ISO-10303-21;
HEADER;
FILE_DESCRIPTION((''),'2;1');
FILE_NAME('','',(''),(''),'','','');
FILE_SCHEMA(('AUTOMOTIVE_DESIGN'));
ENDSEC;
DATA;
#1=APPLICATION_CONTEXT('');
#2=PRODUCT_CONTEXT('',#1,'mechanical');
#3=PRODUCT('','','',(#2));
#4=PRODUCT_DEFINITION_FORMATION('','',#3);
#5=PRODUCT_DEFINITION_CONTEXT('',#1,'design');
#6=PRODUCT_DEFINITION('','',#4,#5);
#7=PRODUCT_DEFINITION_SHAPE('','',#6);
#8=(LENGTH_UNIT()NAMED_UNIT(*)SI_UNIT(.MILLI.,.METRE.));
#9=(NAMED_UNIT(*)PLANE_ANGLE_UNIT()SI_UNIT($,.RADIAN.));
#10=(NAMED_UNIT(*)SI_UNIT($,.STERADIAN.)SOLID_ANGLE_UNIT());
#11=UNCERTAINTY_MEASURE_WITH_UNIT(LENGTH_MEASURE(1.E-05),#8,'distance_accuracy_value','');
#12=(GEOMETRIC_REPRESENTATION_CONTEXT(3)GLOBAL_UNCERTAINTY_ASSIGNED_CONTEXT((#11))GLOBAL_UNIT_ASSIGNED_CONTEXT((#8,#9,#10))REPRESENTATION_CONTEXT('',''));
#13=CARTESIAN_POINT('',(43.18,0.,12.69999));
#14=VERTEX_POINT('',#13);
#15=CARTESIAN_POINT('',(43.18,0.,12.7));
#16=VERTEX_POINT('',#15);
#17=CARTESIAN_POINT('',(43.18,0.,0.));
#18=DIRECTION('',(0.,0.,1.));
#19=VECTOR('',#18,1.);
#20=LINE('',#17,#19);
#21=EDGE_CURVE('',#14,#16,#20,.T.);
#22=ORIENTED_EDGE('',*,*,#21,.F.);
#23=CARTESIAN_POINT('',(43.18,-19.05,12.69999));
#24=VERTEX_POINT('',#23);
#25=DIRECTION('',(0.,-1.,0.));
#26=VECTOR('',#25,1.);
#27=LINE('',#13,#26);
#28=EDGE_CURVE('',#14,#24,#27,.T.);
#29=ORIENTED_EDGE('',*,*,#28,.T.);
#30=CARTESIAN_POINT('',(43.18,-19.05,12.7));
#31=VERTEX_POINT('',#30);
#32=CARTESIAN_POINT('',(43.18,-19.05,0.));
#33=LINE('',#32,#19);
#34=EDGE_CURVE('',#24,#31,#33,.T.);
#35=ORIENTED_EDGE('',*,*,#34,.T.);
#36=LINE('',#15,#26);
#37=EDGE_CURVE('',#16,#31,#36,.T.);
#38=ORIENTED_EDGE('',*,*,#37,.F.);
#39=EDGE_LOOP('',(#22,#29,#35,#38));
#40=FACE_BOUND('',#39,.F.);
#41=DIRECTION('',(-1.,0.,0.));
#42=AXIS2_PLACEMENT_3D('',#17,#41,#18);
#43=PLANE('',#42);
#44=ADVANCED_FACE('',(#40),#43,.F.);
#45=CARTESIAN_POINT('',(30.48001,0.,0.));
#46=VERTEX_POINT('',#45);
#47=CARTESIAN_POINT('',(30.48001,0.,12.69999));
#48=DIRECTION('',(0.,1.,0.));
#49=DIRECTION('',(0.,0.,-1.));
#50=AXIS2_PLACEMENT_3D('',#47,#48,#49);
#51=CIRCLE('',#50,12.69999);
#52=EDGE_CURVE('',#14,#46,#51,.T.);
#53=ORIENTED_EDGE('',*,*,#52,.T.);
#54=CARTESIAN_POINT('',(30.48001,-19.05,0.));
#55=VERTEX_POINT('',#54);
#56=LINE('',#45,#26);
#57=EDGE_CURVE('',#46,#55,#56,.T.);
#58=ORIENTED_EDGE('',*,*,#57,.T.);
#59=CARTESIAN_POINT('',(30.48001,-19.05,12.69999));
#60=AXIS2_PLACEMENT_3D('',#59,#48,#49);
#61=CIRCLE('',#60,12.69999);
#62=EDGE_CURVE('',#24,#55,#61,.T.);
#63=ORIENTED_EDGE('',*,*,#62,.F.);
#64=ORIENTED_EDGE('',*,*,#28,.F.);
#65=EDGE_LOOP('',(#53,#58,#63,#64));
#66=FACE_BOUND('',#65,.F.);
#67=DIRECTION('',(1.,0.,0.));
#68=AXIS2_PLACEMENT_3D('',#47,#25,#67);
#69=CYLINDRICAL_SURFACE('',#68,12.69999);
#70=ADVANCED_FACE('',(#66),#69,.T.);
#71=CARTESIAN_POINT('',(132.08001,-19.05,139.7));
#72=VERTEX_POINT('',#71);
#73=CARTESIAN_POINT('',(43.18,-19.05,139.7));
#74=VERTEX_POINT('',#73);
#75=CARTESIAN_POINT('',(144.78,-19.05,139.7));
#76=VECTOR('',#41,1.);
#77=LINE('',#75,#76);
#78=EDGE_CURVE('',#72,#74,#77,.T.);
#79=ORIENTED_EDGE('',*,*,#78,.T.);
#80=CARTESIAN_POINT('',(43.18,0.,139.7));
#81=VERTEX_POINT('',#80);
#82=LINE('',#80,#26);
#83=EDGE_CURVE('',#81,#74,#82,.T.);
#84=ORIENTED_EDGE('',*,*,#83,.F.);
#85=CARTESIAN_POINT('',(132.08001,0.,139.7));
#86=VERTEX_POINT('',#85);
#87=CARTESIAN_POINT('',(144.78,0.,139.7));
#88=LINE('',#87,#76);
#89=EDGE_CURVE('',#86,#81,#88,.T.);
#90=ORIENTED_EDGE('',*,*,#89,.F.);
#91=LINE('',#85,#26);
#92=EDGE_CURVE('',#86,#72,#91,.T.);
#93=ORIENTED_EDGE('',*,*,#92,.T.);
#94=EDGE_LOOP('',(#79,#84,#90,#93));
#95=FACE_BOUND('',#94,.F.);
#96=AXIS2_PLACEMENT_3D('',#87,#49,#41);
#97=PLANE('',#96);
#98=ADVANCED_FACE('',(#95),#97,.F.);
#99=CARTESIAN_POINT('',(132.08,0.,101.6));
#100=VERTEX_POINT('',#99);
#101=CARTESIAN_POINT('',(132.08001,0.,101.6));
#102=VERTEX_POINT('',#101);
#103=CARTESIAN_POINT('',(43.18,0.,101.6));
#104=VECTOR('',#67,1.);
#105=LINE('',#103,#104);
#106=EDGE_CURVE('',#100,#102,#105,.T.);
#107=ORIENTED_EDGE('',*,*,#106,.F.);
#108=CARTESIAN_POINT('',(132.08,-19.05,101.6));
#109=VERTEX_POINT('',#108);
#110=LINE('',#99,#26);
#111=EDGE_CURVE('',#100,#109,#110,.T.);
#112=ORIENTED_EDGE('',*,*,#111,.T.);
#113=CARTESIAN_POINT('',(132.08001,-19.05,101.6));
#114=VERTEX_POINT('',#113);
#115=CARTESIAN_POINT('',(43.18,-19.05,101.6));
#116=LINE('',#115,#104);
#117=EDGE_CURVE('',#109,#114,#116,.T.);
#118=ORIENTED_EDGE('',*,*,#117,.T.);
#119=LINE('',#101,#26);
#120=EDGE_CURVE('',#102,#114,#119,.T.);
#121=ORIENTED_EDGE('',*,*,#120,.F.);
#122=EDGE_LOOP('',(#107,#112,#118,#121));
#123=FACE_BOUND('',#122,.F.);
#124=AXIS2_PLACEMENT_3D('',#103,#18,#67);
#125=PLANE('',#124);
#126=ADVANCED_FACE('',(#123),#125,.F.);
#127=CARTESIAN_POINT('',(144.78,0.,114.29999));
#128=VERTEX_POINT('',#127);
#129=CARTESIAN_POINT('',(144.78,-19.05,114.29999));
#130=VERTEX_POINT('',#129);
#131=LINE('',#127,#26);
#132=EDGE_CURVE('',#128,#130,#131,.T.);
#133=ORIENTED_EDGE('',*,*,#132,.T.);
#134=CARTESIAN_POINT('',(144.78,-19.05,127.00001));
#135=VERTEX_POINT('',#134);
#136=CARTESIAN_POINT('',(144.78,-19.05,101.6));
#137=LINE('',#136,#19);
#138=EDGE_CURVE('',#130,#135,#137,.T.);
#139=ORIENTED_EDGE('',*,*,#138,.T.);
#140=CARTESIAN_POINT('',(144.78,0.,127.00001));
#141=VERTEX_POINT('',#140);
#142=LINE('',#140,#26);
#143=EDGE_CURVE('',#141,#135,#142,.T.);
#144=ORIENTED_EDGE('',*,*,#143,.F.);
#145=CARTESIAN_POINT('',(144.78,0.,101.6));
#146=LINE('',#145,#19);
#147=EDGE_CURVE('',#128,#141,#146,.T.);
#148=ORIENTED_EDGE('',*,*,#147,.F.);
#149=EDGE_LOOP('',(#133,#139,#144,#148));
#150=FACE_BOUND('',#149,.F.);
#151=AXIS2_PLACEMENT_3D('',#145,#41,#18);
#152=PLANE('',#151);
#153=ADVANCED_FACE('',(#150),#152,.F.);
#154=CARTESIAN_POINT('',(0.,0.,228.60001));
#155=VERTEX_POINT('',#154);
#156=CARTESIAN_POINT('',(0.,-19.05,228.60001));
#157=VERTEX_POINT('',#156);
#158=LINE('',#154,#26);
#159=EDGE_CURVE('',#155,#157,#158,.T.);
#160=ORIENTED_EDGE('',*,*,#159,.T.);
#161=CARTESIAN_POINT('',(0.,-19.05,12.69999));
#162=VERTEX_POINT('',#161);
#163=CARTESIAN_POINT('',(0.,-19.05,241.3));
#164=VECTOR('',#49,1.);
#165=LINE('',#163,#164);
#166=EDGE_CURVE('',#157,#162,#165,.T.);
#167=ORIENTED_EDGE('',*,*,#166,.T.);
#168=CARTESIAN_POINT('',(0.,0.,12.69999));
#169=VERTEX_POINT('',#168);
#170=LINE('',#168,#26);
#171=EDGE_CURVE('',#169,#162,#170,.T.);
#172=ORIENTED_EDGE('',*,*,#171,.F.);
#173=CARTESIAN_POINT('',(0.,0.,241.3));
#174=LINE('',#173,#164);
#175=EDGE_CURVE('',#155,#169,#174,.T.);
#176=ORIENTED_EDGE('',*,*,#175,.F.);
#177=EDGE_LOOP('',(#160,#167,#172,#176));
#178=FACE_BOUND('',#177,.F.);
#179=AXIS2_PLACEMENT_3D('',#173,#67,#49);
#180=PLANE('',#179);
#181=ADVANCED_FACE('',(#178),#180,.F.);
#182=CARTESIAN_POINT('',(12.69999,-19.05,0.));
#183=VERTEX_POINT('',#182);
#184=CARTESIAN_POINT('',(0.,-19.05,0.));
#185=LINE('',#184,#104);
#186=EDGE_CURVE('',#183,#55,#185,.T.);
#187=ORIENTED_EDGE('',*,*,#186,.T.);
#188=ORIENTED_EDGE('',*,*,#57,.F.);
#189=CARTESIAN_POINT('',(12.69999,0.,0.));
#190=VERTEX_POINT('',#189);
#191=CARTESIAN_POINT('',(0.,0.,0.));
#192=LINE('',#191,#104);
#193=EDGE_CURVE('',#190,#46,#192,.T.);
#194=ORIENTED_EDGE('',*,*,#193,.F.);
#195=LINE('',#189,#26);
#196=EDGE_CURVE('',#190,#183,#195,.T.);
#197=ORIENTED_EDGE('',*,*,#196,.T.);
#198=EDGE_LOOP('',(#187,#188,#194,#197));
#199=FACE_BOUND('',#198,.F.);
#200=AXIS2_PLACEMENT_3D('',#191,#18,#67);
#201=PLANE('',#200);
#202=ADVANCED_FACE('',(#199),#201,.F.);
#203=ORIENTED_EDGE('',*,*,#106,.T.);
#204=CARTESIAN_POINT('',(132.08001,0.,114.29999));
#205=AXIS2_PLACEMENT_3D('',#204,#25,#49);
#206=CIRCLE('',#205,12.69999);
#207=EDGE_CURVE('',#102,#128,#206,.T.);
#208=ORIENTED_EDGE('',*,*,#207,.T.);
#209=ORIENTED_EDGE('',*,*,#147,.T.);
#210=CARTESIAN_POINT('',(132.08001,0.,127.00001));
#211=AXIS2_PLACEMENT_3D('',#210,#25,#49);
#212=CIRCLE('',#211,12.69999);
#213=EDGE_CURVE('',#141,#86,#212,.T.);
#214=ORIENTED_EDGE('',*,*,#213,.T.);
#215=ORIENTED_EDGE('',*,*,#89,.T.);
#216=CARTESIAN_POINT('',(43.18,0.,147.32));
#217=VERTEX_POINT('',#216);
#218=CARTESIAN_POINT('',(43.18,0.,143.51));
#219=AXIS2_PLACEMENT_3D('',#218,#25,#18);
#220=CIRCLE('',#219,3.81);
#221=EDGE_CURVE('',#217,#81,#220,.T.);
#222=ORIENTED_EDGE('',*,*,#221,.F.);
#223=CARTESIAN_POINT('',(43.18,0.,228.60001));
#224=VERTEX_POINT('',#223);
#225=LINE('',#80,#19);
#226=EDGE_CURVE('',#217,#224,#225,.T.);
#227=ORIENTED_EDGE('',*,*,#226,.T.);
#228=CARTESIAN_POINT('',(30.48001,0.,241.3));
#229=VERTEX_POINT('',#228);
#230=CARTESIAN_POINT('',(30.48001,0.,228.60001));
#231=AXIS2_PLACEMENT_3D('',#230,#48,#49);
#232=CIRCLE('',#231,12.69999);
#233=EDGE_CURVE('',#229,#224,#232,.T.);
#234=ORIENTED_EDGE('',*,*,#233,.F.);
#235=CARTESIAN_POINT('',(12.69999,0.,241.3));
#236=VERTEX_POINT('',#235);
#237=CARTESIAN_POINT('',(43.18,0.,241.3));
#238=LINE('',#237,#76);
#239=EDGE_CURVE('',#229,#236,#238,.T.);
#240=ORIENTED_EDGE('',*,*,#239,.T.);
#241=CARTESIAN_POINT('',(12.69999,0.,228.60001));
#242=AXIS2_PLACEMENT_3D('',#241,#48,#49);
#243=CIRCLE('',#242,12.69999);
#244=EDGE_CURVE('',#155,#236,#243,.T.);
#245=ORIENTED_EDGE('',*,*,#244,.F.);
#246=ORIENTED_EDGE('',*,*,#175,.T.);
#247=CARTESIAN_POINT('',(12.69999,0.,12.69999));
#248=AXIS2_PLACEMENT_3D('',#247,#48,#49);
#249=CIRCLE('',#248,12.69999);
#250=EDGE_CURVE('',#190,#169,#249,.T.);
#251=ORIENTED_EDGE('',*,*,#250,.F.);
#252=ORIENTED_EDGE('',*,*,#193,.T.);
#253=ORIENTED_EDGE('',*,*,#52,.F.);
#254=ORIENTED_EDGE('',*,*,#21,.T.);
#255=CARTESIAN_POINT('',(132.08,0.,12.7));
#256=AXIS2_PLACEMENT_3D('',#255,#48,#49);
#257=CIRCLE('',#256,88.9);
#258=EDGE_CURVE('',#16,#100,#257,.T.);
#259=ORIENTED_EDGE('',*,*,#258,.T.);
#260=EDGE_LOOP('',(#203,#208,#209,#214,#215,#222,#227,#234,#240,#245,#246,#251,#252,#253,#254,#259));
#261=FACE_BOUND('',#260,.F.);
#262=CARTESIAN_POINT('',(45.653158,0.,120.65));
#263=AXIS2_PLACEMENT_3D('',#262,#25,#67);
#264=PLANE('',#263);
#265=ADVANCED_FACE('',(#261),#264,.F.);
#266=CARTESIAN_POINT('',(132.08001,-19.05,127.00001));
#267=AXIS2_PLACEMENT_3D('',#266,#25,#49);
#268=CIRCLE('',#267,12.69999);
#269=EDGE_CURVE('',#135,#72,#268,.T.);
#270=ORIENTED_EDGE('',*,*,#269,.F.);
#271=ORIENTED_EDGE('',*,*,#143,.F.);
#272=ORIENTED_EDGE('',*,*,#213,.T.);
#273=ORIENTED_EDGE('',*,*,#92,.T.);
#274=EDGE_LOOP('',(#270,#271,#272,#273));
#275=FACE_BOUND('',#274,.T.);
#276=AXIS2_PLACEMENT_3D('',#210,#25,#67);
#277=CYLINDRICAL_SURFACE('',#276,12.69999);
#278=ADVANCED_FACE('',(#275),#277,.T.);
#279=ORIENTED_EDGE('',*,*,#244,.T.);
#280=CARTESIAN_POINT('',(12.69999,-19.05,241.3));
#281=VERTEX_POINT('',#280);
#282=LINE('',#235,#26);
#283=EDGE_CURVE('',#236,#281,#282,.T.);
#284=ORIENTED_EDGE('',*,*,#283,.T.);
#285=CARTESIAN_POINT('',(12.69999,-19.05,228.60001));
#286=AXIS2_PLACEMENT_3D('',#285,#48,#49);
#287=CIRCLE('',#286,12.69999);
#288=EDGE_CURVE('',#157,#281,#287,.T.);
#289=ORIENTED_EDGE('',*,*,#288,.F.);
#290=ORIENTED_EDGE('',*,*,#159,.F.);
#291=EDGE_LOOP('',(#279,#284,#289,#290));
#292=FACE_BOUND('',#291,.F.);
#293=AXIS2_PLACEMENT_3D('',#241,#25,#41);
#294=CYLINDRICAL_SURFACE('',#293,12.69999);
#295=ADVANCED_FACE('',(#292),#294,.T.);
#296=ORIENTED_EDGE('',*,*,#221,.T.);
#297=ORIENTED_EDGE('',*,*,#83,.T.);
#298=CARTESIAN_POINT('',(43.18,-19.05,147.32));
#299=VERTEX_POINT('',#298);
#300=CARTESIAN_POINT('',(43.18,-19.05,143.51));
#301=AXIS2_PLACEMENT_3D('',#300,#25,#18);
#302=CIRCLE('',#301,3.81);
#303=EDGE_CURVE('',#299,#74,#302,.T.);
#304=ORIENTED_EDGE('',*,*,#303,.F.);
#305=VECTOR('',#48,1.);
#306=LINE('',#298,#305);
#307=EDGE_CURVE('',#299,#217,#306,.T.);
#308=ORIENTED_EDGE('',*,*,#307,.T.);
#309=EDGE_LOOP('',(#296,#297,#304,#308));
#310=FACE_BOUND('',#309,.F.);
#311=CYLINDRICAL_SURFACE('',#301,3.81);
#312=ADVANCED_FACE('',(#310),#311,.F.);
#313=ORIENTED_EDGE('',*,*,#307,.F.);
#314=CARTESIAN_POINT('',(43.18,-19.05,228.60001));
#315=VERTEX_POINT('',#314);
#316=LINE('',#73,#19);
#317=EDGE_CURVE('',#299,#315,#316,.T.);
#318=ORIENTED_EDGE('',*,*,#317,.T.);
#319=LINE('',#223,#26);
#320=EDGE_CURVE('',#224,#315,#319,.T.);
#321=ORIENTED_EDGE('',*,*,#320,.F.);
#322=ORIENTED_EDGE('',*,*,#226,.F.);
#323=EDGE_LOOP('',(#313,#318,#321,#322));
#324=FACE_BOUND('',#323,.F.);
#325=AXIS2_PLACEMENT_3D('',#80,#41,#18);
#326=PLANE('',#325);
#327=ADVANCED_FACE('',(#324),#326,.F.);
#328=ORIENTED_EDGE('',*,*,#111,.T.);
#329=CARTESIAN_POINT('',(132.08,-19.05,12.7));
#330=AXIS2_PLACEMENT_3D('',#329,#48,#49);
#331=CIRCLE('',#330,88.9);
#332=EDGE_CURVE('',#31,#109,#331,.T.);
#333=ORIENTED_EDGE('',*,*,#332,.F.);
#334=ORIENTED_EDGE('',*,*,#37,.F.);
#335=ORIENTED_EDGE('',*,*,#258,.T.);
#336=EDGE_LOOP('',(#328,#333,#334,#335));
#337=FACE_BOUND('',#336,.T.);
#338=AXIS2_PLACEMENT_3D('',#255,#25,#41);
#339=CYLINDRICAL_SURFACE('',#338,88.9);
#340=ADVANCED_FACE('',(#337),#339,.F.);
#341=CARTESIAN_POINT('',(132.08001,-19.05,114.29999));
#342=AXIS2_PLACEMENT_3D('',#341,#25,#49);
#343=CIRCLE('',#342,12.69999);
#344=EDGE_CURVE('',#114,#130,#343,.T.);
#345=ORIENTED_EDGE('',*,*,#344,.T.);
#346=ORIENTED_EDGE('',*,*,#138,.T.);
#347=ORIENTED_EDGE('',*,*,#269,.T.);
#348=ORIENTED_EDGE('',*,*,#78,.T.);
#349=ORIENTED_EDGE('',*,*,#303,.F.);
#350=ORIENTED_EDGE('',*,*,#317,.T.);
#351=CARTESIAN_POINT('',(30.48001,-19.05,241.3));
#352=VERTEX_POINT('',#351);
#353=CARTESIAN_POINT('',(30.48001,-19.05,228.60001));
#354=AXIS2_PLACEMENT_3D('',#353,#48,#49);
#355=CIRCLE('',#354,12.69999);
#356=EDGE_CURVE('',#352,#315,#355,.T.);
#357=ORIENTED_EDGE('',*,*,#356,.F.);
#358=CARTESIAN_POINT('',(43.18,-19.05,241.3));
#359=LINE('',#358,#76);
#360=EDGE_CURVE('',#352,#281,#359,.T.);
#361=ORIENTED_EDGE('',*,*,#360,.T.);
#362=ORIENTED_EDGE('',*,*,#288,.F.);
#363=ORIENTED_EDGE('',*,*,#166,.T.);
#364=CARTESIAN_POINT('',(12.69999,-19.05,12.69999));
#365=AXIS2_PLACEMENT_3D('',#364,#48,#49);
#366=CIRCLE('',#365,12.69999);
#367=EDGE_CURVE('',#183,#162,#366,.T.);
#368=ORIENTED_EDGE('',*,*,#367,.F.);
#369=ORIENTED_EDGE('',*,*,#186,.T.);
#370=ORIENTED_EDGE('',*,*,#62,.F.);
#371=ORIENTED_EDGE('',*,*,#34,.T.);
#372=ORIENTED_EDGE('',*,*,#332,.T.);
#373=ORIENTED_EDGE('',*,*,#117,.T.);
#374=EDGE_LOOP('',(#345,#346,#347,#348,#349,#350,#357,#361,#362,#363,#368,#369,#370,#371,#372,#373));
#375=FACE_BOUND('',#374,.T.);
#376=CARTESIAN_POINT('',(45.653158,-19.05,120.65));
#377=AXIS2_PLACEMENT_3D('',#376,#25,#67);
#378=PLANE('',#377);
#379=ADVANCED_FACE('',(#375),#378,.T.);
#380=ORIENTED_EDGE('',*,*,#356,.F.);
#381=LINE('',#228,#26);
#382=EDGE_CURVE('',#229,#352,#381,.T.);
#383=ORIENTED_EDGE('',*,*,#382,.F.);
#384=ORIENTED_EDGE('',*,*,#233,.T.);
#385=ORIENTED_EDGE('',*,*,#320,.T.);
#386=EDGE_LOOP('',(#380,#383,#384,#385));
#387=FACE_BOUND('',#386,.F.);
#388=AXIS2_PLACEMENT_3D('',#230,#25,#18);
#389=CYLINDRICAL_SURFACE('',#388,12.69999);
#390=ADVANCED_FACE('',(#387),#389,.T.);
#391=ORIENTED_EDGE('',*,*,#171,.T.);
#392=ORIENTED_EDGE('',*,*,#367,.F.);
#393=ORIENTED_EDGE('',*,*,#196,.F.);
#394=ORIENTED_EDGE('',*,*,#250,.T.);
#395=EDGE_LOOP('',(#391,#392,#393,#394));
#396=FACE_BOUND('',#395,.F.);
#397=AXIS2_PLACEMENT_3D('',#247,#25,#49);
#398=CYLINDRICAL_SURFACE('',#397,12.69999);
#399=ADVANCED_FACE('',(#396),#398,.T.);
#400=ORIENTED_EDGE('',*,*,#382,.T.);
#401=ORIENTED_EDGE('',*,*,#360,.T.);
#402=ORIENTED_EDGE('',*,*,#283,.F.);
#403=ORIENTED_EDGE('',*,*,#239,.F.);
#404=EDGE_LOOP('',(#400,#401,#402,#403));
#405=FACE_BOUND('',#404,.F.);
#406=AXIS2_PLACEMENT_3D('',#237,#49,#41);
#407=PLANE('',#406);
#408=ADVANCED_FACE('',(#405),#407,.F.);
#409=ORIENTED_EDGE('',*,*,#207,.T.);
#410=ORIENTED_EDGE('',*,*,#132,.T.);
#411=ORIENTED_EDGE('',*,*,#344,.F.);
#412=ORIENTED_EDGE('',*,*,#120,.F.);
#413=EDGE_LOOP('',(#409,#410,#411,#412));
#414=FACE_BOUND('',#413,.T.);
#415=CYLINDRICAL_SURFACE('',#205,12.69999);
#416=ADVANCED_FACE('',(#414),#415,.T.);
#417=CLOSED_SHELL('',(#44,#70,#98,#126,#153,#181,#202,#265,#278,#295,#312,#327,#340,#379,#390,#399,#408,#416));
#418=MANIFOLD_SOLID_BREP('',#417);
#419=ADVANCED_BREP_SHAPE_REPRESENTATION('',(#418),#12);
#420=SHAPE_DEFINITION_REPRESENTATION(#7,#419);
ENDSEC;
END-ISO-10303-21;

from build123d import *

# Parameters (mm, degrees)
F1_DEPTH = 19.05
F2_R     = 88.9
F3_R     = 12.69999
F5_DEPTH = 19.051


# Not quite as in the source:
# - a fillet or chamfer is up to 0.001 mm smaller than in the source, because OpenCascade refuses the exact size


with BuildPart() as f1:
    # F0 (on Front) → F1 (new body)
    with BuildSketch(Plane.XZ):
        Polygon((0, 241.3), (0, 0), (43.18, 0), (43.18, 101.6), (144.78, 101.6), (144.78, 139.7), (43.18, 139.7), (43.18, 241.3), align=None)
    extrude(amount=F1_DEPTH)

    # F2
    f2_edges = [f1.edges().sort_by_distance(p)[0] for p in [
        (43.18, -9.525, 101.6),
    ]]
    fillet(f2_edges, radius=F2_R)

    # F3 (radius 12.7 in the source; OpenCascade refuses exactly that, so slightly less here)
    f3_edges = [f1.edges().sort_by_distance(p)[0] for p in [
        (144.78, -9.525, 139.7),
        (144.78, -9.525, 101.6),
        (43.18, -9.525, 0),
        (43.18, -9.525, 241.3),
        (0, -9.525, 0),
        (0, -9.525, 241.3),
    ]]
    fillet(f3_edges, radius=F3_R)

    # F4 (on face) → F5 (cut, through all)
    with BuildSketch(Plane.XZ.offset(19.05)):
        with BuildLine():
            Line((43.18, 139.7), (43.18, 147.32))
            ThreePointArc((43.18, 147.32), (39.37, 143.51), (43.18, 139.7))
        make_face()
    extrude(amount=-F5_DEPTH, mode=Mode.SUBTRACT)


solid = f1.part
